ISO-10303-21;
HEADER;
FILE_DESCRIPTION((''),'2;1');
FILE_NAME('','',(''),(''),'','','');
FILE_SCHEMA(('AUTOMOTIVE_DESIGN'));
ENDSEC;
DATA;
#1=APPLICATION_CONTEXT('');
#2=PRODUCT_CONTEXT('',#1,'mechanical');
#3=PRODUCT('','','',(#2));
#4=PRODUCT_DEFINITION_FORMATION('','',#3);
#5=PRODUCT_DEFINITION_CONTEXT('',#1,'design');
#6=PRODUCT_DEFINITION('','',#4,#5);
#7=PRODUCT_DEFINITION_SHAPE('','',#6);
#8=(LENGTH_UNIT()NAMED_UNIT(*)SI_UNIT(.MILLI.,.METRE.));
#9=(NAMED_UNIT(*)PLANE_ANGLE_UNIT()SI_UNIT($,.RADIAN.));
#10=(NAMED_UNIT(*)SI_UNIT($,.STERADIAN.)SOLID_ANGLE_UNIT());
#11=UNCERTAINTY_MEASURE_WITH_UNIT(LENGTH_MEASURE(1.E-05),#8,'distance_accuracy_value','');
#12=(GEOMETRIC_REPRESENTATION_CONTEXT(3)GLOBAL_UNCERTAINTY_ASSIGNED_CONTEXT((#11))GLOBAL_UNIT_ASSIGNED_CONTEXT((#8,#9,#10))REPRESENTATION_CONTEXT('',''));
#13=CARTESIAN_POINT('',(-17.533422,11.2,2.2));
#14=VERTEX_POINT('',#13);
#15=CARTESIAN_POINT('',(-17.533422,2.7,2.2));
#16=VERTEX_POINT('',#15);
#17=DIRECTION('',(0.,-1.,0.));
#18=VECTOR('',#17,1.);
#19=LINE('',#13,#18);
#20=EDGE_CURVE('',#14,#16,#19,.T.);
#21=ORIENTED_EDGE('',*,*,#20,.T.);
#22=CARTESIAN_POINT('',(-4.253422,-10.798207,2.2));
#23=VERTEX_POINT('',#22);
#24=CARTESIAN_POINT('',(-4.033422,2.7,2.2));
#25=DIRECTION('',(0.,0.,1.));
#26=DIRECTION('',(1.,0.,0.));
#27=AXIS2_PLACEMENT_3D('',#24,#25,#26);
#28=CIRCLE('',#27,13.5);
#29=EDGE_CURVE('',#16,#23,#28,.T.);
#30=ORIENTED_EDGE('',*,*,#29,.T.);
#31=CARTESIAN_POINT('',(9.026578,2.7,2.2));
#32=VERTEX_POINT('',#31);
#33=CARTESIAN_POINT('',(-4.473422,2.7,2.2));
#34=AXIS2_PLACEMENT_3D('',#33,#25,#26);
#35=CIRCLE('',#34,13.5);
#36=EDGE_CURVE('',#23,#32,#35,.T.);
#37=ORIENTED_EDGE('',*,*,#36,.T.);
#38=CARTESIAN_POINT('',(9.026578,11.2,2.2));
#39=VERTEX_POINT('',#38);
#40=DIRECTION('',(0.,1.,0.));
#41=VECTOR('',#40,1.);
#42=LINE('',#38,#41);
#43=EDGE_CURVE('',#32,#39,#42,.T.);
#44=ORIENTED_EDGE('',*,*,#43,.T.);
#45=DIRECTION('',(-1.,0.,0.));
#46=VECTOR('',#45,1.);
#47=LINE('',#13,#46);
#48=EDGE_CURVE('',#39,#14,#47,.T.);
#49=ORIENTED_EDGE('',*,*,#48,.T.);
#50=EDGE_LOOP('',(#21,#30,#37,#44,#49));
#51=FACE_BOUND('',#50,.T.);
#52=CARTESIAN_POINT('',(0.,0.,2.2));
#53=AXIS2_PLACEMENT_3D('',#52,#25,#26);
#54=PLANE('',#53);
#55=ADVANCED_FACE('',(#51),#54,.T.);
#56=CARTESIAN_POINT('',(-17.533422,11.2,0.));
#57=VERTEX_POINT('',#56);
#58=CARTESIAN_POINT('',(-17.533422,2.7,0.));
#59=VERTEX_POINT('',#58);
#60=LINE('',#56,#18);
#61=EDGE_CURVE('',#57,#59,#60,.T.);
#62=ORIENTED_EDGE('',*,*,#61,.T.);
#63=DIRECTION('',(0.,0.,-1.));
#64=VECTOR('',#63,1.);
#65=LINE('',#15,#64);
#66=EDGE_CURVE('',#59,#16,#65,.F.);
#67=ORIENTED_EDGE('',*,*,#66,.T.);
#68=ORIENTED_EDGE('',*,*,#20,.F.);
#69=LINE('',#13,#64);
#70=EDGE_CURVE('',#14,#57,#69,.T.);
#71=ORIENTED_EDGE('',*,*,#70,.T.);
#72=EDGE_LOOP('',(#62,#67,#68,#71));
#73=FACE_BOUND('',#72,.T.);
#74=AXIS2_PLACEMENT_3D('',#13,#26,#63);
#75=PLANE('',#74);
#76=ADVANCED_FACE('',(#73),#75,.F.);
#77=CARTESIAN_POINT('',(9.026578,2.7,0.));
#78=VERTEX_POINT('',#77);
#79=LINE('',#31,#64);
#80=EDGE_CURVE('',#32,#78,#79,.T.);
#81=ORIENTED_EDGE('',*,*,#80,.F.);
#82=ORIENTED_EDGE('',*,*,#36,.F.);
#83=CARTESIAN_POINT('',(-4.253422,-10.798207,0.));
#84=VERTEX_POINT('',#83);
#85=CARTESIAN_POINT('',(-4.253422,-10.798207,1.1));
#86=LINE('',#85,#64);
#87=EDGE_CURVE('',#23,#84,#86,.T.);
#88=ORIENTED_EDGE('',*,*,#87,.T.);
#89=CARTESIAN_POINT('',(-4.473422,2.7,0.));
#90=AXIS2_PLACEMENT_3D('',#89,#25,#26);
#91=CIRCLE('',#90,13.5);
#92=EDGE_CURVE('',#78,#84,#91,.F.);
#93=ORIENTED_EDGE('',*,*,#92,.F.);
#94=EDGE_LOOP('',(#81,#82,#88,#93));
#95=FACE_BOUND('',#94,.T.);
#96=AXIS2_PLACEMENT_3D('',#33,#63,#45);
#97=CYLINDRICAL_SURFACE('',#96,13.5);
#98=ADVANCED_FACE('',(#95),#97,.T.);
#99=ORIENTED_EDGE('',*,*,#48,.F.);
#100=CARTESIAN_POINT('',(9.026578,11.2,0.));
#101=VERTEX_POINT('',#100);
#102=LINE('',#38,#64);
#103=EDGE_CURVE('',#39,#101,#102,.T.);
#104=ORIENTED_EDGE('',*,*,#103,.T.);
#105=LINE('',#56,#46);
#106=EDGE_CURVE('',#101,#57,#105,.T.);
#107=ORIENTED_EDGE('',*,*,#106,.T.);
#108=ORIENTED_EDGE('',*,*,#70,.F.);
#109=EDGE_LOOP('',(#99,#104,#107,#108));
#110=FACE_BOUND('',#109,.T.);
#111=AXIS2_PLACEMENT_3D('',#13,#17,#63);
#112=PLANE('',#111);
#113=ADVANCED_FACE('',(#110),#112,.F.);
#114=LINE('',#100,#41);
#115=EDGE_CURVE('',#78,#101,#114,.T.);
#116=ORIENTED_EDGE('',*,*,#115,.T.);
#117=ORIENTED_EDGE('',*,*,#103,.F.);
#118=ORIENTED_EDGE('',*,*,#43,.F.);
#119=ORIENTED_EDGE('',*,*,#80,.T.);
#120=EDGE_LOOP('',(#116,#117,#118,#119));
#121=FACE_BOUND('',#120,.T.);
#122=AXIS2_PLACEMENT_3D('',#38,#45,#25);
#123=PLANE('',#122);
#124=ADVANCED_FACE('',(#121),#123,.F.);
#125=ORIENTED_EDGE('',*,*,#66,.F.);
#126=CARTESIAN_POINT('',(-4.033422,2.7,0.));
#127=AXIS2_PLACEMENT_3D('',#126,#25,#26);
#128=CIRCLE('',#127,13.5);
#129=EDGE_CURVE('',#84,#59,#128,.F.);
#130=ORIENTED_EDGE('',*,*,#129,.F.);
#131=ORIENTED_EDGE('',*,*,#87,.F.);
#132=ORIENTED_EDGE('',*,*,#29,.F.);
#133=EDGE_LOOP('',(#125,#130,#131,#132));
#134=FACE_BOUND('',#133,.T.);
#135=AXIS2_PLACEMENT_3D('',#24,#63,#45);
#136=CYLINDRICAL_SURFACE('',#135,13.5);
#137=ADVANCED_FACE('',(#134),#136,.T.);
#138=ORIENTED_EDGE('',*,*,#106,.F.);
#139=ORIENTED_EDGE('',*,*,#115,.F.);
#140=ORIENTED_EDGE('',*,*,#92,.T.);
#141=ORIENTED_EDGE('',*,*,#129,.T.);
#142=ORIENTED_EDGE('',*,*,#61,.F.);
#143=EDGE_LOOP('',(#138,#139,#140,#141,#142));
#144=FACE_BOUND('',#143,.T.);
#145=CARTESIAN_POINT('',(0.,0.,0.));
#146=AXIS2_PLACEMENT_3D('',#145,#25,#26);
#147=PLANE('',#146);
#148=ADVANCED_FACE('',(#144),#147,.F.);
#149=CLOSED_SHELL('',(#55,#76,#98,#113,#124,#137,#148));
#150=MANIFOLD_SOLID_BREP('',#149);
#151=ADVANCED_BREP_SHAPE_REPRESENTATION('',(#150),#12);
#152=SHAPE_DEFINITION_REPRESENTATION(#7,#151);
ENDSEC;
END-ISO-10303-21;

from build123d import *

# Parameters (mm, degrees)
SKETCH_1_W      = 26.56
SKETCH_1_H      = 22
EXTRUDE_1_DEPTH = 2.2
FILLET_1_R      = 13.5


with BuildPart() as part:
    # Эскиз1 → Бобышка-Вытянуть1 (new body)
    with BuildSketch(Plane.XY):
        with Locations((-4.253421702, 0.2)):
            Rectangle(SKETCH_1_W, SKETCH_1_H)
    extrude(amount=EXTRUDE_1_DEPTH)

    # Скругление1
    # the kernel refuses this fillet: 13.5 mm, written as the material it takes off along each edge
    with BuildSketch(Plane(origin=(9.026578298, -10.8, -33.75), x_dir=(0, 1, 0), z_dir=(0, 0, 1)), Plane(origin=(-17.533421702, -10.8, -33.75), x_dir=(1, 0, 0), z_dir=(0, 0, 1))) as fillet_1_piece_1:
        with BuildLine():
            CenterArc((FILLET_1_R, FILLET_1_R), FILLET_1_R, 180, 90)
            Line((0, FILLET_1_R), (0, 0))
            Line((0, 0), (FILLET_1_R, 0))
        make_face()
    extrude(amount=69.7, mode=Mode.SUBTRACT)


solid = part.part
